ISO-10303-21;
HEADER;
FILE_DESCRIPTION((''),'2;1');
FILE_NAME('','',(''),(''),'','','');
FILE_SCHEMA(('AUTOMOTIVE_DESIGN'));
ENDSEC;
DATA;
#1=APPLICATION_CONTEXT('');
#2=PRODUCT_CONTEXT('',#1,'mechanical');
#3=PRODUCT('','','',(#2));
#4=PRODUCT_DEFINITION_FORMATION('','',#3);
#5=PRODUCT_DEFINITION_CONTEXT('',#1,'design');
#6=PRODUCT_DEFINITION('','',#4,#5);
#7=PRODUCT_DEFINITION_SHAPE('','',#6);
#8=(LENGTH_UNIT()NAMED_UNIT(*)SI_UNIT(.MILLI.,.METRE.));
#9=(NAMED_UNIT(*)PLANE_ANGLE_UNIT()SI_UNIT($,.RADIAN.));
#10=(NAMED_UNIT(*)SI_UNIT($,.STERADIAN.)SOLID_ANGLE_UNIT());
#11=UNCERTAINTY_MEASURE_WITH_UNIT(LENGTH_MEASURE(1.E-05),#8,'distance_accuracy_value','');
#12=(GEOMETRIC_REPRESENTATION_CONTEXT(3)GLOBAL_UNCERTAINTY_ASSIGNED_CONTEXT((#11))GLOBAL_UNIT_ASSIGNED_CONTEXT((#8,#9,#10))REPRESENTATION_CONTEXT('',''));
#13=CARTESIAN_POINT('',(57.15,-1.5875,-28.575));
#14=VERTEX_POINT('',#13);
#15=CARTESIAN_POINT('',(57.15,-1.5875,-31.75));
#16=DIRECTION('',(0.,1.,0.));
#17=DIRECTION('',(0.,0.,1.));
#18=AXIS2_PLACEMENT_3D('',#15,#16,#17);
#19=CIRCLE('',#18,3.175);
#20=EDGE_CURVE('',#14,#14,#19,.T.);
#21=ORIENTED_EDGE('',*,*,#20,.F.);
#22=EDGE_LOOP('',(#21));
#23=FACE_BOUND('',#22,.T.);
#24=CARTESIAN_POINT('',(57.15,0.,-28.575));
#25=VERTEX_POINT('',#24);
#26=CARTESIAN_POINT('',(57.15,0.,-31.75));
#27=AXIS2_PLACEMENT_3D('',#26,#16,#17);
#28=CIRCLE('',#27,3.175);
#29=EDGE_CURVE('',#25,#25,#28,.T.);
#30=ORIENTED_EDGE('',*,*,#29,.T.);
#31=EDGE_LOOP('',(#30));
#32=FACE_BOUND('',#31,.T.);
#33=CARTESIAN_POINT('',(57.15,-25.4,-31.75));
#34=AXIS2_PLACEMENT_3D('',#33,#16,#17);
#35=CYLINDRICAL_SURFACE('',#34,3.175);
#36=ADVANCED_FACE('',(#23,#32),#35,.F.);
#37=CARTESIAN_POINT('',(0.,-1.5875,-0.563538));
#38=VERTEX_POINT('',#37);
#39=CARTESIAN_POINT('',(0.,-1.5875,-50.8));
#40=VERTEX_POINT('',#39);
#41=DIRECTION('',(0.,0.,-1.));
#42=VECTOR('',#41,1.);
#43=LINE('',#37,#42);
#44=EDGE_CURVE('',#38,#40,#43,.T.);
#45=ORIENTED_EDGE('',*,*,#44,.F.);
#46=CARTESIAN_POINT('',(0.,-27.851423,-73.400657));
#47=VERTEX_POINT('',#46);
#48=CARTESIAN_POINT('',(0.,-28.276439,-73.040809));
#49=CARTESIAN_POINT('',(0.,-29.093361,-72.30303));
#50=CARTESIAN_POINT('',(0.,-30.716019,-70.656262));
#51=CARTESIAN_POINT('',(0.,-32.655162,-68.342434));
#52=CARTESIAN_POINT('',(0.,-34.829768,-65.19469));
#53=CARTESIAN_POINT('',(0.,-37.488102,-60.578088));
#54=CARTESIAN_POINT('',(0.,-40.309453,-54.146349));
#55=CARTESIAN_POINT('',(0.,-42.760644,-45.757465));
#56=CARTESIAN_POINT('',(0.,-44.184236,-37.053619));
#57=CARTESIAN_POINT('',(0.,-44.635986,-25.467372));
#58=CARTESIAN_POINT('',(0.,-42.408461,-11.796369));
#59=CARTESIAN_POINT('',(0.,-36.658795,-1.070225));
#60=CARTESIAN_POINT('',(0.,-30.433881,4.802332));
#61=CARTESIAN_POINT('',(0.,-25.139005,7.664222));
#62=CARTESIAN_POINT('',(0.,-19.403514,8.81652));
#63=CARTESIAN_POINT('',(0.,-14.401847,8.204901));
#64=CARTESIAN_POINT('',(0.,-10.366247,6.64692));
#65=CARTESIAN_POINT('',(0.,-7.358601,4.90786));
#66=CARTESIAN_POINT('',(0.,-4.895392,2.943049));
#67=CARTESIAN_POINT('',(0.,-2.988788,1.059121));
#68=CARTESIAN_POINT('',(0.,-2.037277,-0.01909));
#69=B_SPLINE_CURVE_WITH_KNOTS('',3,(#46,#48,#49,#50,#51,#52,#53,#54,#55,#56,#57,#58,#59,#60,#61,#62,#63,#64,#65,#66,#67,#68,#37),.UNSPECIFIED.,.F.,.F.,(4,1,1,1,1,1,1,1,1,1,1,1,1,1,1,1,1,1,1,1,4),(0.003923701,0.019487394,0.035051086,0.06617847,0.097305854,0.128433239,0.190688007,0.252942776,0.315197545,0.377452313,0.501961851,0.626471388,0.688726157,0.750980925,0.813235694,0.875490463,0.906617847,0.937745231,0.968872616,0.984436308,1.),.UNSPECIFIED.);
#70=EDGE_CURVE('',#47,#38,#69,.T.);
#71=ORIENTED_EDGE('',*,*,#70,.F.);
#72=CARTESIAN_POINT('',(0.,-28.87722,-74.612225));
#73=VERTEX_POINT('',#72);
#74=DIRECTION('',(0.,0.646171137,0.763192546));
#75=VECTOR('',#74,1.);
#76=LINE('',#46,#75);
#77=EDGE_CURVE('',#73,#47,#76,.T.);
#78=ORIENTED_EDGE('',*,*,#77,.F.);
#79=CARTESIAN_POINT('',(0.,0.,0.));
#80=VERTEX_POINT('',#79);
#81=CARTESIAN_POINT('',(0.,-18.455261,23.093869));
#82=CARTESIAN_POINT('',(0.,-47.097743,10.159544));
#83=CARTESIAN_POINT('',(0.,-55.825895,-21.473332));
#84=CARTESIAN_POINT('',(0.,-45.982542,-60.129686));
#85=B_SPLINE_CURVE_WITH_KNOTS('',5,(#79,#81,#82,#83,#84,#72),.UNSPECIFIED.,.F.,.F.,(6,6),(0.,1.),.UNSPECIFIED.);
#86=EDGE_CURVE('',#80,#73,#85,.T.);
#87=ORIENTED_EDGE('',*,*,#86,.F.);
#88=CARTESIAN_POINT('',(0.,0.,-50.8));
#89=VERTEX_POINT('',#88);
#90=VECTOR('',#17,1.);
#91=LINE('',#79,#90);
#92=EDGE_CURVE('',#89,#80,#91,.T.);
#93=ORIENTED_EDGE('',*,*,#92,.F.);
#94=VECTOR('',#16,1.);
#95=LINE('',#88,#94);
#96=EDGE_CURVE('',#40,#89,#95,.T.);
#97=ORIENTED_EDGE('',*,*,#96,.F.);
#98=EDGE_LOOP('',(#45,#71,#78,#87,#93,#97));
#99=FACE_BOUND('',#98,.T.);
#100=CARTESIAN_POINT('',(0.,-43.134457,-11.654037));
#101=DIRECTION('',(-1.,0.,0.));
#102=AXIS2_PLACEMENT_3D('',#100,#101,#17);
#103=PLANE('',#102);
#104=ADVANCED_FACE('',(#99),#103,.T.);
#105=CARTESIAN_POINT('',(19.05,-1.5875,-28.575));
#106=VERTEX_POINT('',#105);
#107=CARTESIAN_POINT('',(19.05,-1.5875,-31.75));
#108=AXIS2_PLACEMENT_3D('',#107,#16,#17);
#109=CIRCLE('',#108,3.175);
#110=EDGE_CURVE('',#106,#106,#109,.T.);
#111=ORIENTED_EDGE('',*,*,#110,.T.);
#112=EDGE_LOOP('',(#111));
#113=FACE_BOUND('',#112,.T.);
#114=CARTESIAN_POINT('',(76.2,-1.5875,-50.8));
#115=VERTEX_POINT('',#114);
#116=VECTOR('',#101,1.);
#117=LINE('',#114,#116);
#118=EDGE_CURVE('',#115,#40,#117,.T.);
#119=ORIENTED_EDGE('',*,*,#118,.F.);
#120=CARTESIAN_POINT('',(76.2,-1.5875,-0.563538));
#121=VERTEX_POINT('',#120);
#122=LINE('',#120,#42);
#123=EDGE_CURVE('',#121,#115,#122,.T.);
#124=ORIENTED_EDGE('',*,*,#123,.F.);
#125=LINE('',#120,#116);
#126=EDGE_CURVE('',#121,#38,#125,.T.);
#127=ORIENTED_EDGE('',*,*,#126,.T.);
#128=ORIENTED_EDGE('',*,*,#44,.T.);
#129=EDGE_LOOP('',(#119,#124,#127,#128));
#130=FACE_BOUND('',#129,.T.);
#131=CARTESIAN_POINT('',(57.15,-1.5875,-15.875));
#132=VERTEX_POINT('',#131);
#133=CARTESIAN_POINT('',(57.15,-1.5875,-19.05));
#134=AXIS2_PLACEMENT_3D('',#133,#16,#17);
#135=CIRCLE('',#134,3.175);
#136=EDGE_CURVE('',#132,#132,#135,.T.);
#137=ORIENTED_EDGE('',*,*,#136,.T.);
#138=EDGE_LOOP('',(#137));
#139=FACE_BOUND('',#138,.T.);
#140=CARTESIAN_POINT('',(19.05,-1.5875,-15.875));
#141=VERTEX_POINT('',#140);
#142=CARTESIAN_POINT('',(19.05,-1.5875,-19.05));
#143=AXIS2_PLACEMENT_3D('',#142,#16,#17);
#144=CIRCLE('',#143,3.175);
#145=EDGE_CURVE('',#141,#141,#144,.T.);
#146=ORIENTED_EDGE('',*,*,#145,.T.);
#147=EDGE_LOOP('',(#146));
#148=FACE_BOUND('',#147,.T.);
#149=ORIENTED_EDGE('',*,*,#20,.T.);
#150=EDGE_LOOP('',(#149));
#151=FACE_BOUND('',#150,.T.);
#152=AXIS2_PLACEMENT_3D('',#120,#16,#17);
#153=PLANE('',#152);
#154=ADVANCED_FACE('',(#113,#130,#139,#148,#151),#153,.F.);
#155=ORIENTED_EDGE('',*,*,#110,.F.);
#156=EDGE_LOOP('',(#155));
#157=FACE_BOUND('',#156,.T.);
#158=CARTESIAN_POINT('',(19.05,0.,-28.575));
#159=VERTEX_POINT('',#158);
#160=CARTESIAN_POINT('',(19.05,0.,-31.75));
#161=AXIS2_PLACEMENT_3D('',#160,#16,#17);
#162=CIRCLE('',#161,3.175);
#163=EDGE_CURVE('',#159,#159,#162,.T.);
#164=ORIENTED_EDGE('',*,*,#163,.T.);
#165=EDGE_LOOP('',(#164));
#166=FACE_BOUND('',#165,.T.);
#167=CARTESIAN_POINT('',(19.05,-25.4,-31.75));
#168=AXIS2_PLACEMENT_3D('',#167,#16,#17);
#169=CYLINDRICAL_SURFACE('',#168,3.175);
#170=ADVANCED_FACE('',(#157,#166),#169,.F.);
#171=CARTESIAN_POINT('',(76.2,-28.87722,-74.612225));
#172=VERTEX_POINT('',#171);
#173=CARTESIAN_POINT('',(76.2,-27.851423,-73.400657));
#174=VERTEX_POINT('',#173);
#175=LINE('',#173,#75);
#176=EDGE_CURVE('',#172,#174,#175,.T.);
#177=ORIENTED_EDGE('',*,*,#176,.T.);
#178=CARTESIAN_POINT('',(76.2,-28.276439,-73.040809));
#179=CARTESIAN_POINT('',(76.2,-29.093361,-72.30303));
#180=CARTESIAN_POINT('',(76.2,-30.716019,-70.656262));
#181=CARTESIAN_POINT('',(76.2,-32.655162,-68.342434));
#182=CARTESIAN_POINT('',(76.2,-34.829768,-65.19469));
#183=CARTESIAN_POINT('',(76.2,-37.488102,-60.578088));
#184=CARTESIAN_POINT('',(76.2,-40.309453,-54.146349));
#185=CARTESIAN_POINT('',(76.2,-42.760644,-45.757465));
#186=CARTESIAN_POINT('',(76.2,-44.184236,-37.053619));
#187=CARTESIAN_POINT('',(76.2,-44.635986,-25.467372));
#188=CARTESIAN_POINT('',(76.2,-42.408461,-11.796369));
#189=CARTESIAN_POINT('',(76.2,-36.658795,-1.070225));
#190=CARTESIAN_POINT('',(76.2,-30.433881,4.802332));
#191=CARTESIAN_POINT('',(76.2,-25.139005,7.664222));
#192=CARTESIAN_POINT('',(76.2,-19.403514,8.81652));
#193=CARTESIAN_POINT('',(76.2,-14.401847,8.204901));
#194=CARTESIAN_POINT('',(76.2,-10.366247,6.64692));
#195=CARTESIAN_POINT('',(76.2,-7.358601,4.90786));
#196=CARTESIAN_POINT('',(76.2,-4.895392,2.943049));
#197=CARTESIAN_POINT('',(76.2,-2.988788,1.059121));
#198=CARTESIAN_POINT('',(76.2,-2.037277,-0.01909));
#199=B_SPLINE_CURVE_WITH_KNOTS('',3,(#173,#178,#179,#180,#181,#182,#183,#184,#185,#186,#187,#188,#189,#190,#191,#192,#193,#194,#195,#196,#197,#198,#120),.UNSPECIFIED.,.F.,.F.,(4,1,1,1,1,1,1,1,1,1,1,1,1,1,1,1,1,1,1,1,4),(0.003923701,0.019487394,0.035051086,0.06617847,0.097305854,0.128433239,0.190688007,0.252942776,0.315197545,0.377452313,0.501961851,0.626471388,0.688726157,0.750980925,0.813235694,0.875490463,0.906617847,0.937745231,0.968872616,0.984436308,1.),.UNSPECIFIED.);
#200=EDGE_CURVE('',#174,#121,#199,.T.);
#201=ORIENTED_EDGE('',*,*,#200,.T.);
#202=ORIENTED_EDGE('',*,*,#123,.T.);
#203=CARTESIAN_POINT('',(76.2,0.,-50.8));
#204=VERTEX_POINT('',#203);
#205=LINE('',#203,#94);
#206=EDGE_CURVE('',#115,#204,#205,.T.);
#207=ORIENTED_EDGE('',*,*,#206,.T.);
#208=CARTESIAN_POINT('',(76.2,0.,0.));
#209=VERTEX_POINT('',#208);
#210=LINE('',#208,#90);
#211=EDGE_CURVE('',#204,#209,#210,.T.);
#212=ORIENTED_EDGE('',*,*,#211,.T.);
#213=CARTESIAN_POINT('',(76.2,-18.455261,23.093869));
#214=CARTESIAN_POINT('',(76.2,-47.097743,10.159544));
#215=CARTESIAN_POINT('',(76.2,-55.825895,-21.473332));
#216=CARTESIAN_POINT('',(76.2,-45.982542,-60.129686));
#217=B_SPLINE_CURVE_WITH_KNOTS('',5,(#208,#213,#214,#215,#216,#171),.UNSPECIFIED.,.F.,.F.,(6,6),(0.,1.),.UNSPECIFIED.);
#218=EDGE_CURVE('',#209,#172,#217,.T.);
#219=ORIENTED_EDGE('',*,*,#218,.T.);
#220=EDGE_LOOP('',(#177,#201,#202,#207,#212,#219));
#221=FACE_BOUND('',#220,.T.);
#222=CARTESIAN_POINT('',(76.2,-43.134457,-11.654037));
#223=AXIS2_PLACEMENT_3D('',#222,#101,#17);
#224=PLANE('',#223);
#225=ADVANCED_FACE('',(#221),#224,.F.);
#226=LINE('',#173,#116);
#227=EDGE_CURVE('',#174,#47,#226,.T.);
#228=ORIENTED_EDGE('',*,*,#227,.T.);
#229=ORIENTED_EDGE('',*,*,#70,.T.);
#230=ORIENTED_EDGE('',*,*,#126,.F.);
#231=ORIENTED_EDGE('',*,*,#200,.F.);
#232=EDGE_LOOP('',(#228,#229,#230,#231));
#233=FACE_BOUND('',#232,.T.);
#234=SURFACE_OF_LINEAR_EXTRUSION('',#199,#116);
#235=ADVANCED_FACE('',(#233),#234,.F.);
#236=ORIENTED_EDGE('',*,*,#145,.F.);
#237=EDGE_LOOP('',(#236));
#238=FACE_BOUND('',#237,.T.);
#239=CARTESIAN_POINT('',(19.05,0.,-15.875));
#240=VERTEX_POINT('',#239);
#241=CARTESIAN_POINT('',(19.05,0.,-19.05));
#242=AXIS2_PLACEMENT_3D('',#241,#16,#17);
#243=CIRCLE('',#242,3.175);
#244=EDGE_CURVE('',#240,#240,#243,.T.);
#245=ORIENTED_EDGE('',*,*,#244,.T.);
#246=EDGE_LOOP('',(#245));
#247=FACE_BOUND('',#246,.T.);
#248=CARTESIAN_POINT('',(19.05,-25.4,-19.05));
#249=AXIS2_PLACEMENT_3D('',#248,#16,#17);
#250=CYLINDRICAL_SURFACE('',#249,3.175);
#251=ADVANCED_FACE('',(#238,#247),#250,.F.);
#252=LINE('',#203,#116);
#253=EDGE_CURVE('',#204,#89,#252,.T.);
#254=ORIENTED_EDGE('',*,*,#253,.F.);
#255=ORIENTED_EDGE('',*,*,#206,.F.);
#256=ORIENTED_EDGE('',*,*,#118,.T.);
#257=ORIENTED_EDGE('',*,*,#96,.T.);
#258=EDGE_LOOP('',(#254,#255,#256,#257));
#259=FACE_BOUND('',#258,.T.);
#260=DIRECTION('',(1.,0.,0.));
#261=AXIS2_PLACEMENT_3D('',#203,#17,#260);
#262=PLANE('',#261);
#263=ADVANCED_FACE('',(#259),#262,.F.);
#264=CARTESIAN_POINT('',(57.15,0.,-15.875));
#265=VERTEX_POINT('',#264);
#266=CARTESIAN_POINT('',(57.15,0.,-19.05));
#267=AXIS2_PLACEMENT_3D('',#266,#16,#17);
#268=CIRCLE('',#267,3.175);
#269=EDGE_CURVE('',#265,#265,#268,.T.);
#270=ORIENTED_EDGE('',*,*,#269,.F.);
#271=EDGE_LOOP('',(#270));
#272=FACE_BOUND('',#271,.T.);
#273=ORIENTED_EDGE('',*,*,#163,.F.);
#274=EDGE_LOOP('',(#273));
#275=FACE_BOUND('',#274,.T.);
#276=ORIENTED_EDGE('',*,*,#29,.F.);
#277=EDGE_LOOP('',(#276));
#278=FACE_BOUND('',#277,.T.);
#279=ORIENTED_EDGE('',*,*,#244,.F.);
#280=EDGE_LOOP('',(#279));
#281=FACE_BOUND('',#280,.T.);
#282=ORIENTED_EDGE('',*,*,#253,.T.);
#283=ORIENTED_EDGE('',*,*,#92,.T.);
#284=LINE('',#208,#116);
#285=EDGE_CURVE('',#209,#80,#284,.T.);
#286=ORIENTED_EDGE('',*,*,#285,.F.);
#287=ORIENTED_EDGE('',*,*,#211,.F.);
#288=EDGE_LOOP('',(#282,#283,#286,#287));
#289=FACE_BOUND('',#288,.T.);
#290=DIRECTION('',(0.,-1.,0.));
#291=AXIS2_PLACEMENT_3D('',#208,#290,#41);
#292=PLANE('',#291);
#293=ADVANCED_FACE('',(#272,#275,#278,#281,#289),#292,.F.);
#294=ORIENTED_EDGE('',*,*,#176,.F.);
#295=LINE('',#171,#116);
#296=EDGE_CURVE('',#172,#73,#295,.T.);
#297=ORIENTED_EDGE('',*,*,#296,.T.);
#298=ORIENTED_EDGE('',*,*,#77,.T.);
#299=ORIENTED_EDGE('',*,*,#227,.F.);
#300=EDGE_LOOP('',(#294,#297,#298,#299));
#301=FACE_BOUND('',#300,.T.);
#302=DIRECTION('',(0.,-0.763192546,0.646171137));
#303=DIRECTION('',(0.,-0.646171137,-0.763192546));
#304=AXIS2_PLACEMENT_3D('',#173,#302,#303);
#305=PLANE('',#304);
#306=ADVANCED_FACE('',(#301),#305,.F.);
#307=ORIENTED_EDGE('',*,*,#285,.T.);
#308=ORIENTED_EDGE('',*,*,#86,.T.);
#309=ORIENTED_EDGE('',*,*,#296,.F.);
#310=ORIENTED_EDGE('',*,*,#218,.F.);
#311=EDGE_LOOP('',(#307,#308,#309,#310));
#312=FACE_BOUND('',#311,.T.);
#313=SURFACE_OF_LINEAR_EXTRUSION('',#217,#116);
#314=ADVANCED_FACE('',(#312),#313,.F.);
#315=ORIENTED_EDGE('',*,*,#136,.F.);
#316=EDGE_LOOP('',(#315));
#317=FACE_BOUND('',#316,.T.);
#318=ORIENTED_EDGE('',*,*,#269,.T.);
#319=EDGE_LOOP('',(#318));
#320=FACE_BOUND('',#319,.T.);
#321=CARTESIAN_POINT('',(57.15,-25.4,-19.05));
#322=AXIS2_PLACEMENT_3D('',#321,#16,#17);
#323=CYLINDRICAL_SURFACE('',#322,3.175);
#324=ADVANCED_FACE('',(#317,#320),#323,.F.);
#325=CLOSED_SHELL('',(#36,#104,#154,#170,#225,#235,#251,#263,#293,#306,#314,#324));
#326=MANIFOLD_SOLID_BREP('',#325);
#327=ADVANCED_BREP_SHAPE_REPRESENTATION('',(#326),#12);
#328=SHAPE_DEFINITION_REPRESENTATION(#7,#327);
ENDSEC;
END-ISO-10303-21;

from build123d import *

# Parameters (mm, degrees)
BOSS_EXTRUDE2_DEPTH = 76.2
SKETCH4_R           = 3.175
CUT_EXTRUDE1_DEPTH  = 25.4


# Read off the part's stored shape, not the designer's step: Boss-Extrude2
with BuildPart() as part:
    # Boss-Extrude2 outline → Boss-Extrude2 (new body)
    with BuildSketch(Plane(origin=(0, 0, 0), x_dir=(0, 0, -1), z_dir=(1, 0, 0))):
        with BuildLine():
            Line((50.8, 0), (0, 0))
            add(Edge.make_bspline(
                [(0, 0), (-23.093868685, -18.455260894), (-10.1595442, -47.097742579), (21.473331951, -55.825894818), (60.12968581, -45.98254215), (74.612224677, -28.877219623)],
                knots=[0, 0, 0, 0, 0, 0, 1, 1, 1, 1, 1, 1], degree=5))
            Line((74.612224677, -28.877219623), (73.400656511, -27.851422943))
            add(Edge.make_bspline(
                [(73.400656511, -27.851422943), (73.040808721, -28.276439066), (72.303030346, -29.093361117), (70.65626187, -30.716019497), (68.342434421, -32.655162364), (65.194689539, -34.82976825), (60.578087813, -37.488101748), (54.146349457, -40.309453372), (45.757464722, -42.760644317), (37.053619061, -44.18423618), (25.46737183, -44.635985744), (11.79636869, -42.408460512), (1.070224576, -36.658794962), (-4.802331787, -30.433881169), (-7.664221751, -25.139005486), (-8.816520125, -19.403513515), (-8.204900671, -14.401846822), (-6.646919896, -10.366246876), (-4.907859633, -7.358601035), (-2.943049119, -4.895392466), (-1.059121191, -2.988787926), (0.019090287, -2.037276651), (0.563538482, -1.5875)],
                knots=[0.003923701, 0.003923701, 0.003923701, 0.003923701, 0.019487394, 0.035051086, 0.06617847, 0.097305854, 0.128433239, 0.190688007, 0.252942776, 0.315197545, 0.377452313, 0.501961851, 0.626471388, 0.688726157, 0.750980925, 0.813235694, 0.875490463, 0.906617847, 0.937745231, 0.968872616, 0.984436308, 1, 1, 1, 1], degree=3))
            Line((0.563538482, -1.5875), (50.8, -1.5875))
            Line((50.8, -1.5875), (50.8, 0))
        make_face()
    extrude(amount=BOSS_EXTRUDE2_DEPTH)

    # Sketch4 → Cut-Extrude1 (cut)
    with BuildSketch(Plane(origin=(0, 0, 0), x_dir=(1, 0, 0), z_dir=(0, 1, 0))):
        with Locations(Location((57.15, 31.75, 0), (0, 0, 270))):
            Circle(SKETCH4_R)
        with Locations(Location((57.15, 19.05, 0), (0, 0, 270))):
            Circle(SKETCH4_R)
        with Locations(Location((19.05, 31.75, 0), (0, 0, 270))):
            Circle(SKETCH4_R)
        with Locations(Location((19.05, 19.05, 0), (0, 0, 270))):
            Circle(SKETCH4_R)
    extrude(amount=-CUT_EXTRUDE1_DEPTH, mode=Mode.SUBTRACT)


solid = part.part
